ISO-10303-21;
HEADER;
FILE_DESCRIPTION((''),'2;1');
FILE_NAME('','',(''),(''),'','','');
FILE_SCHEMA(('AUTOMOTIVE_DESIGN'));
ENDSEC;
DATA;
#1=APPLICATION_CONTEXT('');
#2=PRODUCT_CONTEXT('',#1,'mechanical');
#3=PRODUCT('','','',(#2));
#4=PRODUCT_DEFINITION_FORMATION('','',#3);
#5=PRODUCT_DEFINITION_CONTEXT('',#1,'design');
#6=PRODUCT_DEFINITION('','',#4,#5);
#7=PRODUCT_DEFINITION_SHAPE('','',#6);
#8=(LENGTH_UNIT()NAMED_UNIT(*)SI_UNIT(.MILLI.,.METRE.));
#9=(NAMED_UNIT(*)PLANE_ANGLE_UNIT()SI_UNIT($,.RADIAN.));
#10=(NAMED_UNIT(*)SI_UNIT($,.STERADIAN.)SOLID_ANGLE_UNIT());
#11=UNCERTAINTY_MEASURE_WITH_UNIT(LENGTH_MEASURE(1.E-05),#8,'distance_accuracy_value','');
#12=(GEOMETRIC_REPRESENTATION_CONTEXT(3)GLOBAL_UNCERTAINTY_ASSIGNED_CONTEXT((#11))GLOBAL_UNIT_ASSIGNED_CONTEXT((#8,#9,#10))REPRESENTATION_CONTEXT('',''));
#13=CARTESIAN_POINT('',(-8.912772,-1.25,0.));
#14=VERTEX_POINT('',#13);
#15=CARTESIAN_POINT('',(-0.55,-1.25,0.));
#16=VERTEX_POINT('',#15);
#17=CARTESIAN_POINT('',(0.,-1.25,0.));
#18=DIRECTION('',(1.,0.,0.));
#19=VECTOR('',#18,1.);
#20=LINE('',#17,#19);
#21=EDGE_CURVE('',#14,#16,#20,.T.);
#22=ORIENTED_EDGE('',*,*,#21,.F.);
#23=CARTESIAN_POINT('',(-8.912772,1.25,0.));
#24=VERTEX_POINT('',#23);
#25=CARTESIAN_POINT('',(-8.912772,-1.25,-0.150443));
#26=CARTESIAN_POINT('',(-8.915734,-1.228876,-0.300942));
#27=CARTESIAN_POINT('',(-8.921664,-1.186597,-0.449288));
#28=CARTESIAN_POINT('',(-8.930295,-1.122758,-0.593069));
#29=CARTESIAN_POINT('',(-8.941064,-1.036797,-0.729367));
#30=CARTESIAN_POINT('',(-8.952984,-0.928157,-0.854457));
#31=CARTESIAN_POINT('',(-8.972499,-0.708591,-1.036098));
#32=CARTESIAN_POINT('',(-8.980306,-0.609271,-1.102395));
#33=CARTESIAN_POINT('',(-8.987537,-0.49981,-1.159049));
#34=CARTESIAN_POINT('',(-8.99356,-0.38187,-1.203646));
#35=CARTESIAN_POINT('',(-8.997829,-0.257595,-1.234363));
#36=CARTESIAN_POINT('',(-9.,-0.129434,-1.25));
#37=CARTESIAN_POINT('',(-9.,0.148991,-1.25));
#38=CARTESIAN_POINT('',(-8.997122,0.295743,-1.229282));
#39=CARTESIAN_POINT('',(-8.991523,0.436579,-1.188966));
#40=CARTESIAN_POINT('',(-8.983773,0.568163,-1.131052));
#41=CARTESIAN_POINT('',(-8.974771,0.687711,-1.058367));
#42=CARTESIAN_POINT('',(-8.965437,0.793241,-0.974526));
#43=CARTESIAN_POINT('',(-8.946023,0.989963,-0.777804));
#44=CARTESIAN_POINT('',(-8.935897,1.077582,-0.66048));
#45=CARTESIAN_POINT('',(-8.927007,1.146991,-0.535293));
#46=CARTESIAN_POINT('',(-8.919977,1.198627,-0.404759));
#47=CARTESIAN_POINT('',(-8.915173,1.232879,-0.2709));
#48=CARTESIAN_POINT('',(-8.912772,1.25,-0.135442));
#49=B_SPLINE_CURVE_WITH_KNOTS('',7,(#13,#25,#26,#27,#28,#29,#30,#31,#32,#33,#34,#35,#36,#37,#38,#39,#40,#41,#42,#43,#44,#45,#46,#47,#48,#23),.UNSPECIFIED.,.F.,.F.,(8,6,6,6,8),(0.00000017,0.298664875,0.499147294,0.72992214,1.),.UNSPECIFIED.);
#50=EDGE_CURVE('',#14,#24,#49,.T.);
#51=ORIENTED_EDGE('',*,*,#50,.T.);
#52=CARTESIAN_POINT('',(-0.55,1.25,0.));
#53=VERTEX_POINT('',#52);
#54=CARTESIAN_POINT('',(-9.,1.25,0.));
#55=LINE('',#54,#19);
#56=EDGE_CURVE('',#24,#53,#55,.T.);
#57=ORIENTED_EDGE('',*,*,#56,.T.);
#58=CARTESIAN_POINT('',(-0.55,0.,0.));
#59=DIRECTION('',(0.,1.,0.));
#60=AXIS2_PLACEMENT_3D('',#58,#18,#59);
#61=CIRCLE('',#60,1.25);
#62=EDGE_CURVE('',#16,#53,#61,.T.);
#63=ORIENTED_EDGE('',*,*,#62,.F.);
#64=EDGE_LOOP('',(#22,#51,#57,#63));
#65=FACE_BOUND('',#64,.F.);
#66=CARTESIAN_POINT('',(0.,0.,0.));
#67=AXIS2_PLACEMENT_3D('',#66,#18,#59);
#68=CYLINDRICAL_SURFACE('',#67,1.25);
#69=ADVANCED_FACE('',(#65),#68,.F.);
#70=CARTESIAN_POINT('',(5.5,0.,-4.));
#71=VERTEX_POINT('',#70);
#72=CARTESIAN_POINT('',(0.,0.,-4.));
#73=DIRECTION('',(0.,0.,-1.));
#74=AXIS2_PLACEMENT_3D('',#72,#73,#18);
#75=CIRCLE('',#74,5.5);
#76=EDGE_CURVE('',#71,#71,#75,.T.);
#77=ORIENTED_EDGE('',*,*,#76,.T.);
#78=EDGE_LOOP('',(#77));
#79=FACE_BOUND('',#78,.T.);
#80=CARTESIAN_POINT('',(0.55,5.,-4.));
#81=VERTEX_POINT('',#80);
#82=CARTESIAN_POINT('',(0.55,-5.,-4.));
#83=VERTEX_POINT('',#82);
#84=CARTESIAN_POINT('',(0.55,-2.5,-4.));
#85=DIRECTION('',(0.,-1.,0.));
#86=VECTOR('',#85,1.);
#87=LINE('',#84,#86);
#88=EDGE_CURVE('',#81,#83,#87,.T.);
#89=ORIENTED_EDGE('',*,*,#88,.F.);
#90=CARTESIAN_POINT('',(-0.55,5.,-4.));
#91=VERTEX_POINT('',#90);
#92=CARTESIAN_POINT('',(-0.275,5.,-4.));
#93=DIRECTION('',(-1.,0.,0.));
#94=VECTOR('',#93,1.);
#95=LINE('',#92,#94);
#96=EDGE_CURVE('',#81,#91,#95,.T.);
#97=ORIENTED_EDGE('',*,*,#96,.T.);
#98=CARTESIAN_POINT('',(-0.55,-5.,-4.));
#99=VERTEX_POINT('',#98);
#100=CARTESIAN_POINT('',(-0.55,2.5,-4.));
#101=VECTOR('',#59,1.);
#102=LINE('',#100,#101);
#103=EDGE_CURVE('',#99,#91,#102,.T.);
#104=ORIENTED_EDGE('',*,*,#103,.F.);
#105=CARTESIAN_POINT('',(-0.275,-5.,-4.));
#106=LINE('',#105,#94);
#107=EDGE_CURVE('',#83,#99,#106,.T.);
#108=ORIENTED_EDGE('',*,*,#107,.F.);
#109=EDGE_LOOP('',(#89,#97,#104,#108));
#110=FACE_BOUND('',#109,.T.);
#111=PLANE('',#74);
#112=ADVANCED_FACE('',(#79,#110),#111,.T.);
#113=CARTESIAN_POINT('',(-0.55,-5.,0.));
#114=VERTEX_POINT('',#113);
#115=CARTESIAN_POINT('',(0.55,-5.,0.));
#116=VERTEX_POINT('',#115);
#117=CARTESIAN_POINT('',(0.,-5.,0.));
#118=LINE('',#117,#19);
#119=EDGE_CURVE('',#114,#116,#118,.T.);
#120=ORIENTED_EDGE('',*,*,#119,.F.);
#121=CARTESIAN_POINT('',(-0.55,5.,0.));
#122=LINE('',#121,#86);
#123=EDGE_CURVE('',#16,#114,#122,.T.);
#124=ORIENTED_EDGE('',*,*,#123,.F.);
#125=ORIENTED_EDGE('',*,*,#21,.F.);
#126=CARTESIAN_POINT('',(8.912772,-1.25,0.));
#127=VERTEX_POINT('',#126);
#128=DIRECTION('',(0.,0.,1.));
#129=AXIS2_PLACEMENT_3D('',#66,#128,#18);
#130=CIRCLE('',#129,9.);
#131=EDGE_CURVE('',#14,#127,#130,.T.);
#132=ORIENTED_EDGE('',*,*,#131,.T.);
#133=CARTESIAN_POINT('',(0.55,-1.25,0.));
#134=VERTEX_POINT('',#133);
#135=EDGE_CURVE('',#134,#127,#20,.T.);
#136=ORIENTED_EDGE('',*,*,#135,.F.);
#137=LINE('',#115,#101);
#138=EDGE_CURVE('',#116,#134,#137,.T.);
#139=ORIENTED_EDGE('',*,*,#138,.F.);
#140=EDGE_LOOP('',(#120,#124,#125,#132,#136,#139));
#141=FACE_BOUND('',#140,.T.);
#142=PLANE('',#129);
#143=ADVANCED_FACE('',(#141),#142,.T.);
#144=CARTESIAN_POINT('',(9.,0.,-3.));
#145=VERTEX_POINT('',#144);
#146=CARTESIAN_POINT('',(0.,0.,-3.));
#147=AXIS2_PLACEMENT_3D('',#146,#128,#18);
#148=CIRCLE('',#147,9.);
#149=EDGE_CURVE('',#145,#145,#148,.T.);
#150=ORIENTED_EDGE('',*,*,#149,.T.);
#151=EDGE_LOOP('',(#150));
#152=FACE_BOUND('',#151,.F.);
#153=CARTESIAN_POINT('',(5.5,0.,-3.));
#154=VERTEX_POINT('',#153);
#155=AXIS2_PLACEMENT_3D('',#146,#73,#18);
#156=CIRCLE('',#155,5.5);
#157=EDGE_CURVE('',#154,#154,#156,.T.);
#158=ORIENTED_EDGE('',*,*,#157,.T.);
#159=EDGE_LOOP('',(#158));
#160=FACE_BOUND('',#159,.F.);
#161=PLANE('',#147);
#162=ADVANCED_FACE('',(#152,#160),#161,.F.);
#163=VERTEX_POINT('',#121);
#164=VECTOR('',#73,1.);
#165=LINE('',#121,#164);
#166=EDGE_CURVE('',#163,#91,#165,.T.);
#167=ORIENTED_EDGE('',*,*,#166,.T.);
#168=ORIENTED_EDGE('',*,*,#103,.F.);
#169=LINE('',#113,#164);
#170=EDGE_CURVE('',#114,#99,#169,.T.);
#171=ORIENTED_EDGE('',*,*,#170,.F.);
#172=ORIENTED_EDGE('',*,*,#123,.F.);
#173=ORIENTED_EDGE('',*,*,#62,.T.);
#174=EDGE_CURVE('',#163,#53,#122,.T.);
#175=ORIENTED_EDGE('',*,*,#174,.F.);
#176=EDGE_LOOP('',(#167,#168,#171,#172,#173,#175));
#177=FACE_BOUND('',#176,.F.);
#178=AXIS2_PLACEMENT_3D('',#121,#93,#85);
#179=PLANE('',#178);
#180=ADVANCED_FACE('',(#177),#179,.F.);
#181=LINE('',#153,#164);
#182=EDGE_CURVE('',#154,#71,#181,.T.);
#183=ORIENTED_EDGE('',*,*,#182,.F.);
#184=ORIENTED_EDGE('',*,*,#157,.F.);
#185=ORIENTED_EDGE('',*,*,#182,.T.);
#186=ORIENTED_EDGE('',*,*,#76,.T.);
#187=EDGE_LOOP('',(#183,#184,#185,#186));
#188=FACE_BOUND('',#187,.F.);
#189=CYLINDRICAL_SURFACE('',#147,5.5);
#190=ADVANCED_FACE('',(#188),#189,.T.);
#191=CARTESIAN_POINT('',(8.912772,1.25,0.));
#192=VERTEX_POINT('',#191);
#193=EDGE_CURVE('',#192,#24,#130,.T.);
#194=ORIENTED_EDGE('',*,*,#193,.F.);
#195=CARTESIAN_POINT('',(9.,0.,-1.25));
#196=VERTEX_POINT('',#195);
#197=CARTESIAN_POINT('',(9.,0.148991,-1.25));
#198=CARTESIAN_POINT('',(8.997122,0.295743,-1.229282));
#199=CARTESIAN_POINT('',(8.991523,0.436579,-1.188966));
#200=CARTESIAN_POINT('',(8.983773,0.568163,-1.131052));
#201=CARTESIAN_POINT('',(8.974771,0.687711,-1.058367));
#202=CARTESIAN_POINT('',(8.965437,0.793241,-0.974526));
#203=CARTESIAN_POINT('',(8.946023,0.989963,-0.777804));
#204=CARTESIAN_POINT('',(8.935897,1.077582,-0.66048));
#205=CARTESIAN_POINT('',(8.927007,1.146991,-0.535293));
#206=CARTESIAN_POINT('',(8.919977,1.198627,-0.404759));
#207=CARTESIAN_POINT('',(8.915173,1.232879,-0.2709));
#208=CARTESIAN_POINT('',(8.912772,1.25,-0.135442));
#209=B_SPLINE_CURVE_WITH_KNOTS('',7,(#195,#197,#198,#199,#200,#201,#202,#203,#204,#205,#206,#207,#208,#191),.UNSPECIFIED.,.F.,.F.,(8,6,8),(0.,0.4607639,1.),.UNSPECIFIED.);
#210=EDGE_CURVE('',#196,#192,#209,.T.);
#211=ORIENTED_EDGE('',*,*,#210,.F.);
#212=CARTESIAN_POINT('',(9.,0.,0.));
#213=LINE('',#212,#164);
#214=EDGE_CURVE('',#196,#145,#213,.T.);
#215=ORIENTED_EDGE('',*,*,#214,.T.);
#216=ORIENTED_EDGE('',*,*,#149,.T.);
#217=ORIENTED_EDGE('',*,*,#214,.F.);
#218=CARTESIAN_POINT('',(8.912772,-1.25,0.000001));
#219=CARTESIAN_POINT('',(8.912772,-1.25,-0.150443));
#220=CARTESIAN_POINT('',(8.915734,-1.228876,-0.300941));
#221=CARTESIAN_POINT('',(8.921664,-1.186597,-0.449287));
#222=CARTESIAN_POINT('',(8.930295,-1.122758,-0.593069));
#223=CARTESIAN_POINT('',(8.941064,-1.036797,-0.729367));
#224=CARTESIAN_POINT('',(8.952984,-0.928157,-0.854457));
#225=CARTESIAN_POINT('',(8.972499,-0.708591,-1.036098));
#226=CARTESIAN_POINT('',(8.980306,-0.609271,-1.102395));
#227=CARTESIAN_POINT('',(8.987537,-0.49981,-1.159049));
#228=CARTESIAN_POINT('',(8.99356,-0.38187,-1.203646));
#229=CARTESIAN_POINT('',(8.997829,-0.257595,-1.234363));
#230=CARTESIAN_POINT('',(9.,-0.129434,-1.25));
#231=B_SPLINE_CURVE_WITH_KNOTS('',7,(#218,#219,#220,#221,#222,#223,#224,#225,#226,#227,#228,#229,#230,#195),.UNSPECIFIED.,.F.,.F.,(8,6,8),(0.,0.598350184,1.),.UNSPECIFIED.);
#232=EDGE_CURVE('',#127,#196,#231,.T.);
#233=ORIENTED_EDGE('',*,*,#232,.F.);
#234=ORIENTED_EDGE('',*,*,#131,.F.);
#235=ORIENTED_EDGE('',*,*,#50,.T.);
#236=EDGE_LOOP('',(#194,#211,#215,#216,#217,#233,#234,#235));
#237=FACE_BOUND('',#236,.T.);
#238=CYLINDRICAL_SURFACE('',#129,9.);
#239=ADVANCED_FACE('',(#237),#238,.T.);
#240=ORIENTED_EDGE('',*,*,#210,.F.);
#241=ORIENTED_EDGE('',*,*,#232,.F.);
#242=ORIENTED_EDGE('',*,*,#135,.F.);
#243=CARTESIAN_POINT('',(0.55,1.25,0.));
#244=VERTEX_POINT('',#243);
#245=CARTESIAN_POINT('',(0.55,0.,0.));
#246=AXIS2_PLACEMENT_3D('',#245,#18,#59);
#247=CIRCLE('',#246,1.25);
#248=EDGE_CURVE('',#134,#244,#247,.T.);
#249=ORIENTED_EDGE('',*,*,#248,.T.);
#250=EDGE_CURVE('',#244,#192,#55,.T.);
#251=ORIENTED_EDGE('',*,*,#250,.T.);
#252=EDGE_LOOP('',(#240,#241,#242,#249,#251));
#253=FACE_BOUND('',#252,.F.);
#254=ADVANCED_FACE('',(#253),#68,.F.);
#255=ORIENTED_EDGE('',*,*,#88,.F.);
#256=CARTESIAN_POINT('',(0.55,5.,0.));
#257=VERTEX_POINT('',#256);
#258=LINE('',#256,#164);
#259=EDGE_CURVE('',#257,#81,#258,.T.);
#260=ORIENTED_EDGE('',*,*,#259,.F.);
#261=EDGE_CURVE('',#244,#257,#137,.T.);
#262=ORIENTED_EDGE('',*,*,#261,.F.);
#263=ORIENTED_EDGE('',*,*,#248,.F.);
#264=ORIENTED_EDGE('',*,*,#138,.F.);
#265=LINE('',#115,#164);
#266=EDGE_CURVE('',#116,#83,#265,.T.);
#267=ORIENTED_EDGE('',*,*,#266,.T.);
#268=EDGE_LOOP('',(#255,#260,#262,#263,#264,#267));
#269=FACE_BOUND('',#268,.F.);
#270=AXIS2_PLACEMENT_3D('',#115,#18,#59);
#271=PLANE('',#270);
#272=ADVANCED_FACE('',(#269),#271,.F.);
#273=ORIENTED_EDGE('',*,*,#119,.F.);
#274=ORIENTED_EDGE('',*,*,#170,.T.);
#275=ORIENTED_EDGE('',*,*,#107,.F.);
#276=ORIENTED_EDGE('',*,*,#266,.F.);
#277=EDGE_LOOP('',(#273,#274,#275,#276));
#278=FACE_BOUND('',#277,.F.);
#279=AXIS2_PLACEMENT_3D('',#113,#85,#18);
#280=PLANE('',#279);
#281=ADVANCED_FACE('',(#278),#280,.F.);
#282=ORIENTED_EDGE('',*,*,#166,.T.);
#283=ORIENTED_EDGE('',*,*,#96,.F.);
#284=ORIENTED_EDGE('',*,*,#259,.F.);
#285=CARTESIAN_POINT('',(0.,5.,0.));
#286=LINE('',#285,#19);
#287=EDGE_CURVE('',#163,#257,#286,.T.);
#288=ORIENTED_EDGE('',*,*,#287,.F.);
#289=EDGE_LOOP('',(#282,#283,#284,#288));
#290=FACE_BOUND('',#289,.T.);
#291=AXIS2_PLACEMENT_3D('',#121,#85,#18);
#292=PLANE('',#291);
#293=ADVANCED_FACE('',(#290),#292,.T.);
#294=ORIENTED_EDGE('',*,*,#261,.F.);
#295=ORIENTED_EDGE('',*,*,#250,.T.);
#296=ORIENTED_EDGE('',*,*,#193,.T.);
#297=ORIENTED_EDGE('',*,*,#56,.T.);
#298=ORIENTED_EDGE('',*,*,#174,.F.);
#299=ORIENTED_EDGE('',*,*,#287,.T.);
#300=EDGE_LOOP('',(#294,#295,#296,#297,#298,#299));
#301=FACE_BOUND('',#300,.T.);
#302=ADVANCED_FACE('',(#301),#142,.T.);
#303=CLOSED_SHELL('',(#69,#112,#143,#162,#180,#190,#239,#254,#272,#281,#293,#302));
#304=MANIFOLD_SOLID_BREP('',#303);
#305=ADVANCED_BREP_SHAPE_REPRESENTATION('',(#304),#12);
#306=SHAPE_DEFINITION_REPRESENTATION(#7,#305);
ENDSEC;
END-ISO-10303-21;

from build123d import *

# Parameters (mm, degrees)
F0_R     = 9
F1_DEPTH = 3
F2_R     = 5.5
F3_DEPTH = 1
F4_R     = 1.25
F5_DEPTH = 9
F6_W     = 1.1
F6_H     = 3.75
F6_H_2   = 2.5
F7_DEPTH = 4.001


# Not quite as in the source:
# - a feature names something its author has since deleted; it is built from what else it names


with BuildPart() as f1:
    # F0 (on Top) → F1 (new body)
    with BuildSketch(Plane.XY):
        Circle(F0_R)
    extrude(amount=-F1_DEPTH)

    # F2 (on face) → F3 (join)
    with BuildSketch(Plane(origin=(0, 0, -3), x_dir=(1, 0, 0), z_dir=(0, 0, -1))):
        Circle(F2_R)
    extrude(amount=F3_DEPTH)

    # F4 (on Right) → F5 (cut, symmetric)
    with BuildSketch(Plane.YZ):
        Circle(F4_R)
    extrude(amount=F5_DEPTH, both=True, mode=Mode.SUBTRACT)

    # F6 (on face) → F7 (cut, through all)
    with BuildSketch(Plane.XY):
        with Locations((0, -3.125)):
            Rectangle(F6_W, F6_H)
        Rectangle(F6_W, F6_H_2)
        with Locations((0, 3.125)):
            Rectangle(F6_W, F6_H)
    extrude(amount=-F7_DEPTH, mode=Mode.SUBTRACT)


solid = f1.part
